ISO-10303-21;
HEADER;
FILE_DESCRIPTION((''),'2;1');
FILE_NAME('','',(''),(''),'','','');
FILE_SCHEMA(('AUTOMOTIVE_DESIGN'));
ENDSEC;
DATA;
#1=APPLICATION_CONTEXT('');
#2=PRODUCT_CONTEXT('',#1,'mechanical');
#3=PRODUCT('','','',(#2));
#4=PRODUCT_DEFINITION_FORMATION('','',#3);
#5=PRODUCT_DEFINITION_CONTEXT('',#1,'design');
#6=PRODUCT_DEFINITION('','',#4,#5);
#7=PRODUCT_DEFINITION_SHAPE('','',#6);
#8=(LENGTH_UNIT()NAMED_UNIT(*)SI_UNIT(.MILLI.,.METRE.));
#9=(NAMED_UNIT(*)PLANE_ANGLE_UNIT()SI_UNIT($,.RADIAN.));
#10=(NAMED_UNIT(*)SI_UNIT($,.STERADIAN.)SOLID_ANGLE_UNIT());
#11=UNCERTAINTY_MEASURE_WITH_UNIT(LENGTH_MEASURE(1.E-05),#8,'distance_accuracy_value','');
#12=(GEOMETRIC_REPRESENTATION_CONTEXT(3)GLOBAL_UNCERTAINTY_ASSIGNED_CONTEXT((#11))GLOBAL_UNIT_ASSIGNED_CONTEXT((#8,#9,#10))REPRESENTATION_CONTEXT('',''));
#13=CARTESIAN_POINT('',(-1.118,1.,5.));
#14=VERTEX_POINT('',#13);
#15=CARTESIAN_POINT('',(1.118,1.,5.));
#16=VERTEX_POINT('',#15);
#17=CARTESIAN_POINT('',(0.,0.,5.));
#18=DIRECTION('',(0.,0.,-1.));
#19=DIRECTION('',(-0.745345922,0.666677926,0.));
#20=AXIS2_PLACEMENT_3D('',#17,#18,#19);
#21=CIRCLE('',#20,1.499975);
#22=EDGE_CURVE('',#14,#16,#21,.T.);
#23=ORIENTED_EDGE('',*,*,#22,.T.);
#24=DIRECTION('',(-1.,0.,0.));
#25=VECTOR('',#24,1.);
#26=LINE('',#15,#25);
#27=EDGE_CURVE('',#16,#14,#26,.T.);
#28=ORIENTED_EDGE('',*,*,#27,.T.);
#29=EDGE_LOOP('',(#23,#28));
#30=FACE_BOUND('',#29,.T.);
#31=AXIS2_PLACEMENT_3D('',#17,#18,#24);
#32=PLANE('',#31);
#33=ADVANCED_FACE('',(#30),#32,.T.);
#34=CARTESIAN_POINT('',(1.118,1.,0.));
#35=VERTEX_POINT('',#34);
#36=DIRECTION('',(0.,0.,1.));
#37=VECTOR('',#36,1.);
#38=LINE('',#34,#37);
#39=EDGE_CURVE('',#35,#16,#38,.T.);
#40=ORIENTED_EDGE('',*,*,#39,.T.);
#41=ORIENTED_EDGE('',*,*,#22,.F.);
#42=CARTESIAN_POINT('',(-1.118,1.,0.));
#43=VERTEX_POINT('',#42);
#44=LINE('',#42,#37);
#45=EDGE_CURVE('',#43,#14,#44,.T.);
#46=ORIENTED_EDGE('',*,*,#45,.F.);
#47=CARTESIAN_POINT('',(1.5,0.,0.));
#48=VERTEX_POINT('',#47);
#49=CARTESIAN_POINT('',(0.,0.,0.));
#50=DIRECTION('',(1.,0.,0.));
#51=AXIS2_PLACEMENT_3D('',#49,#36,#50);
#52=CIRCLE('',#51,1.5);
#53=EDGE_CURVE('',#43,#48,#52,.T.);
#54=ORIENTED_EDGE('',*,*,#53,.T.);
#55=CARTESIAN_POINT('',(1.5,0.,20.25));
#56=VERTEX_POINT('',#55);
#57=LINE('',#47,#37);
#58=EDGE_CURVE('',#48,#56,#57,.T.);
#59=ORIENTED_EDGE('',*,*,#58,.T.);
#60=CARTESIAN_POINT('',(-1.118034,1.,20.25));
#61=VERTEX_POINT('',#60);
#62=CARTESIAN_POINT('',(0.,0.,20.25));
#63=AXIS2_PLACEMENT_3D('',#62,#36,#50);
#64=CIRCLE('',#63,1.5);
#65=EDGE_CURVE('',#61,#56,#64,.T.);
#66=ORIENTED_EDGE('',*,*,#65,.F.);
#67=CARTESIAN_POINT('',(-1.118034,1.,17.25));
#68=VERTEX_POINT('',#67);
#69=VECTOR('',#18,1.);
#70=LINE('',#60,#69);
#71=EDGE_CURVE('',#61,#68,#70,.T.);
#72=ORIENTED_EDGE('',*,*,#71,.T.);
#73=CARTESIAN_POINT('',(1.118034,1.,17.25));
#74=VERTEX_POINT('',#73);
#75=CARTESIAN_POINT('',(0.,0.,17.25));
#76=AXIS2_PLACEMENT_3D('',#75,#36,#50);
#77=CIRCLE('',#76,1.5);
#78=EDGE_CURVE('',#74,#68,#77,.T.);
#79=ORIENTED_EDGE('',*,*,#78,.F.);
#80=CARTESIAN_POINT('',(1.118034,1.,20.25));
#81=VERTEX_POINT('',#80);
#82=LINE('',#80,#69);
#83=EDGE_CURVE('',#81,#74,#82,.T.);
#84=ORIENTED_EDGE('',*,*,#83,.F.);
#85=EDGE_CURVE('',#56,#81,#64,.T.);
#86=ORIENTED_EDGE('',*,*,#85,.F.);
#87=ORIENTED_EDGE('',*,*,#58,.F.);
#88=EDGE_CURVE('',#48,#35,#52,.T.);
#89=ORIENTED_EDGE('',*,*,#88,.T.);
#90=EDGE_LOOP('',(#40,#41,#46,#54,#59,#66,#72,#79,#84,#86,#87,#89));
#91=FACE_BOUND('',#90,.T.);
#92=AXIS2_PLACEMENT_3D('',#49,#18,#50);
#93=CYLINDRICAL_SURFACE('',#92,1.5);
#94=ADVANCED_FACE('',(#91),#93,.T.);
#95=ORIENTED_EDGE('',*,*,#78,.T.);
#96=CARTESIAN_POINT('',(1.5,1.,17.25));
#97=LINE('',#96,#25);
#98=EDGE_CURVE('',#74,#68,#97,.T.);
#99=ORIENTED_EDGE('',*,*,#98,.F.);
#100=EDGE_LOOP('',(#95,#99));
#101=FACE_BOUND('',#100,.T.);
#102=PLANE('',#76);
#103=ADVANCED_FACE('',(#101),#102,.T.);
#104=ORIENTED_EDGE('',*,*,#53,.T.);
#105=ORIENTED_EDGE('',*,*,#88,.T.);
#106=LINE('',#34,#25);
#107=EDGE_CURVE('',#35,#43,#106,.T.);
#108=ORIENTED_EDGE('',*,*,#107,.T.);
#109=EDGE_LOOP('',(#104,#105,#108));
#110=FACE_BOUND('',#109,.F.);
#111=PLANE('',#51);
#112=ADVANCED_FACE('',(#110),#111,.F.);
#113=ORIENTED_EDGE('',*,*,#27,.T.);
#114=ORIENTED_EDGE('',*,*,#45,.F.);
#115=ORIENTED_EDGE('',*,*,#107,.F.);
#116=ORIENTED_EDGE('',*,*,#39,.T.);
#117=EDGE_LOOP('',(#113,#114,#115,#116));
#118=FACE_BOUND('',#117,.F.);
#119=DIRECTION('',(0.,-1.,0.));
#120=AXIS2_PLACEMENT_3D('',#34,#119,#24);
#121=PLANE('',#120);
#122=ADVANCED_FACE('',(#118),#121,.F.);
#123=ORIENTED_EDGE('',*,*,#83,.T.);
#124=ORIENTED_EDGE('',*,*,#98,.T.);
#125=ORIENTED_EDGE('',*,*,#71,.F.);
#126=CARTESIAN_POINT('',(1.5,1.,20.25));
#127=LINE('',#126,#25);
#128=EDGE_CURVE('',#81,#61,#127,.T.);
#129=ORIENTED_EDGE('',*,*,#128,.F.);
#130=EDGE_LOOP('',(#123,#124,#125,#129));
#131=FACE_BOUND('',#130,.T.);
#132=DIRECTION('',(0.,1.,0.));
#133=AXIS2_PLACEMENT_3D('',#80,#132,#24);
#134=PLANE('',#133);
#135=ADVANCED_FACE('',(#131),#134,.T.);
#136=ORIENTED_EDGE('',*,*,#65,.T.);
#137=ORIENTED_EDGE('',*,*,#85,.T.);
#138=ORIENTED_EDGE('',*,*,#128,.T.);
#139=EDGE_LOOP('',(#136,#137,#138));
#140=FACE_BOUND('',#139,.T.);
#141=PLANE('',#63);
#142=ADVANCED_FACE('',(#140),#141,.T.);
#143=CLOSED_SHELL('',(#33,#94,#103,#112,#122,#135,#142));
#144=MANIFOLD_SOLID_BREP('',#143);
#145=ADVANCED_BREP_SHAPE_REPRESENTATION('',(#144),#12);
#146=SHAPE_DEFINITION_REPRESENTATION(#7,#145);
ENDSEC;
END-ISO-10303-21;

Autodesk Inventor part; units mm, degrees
ref_plane "YZ Plane" through (0, 0, 0) normal (1, 0, 0) x (0, 1, 0)
ref_plane "XZ Plane" through (0, 0, 0) normal (0, 1, 0) x (-1, 0, 0)
ref_plane "XY Plane" through (0, 0, 0) normal (0, 0, 1) x (1, 0, 0)
sketch "Эскиз1" plane through (0, 0, 0) normal (0, 0, 1) x (1, 0, 0)
  circle A0 centre (0, 0) radius 1.5
  dimension "d0" = 3
extrude "Выдавливание1" add sketch "Эскиз1" along normal blind 20.25
sketch "Эскиз2" plane through (0, 0, 20.25) normal (0, 0, 1) x (1, 0, 0)
  line L0 (-1.5, -1) -> (1.5, -1)
  line L1 (1.5, -1) -> (1.5, 1)
  line L2 (1.5, 1) -> (-1.5, 1)
  line L3 (-1.5, 1) -> (-1.5, -1)
  line L4 (-1.5, -1) -> (1.5, 1) construction
  line L5 (1.5, -1) -> (-1.5, 1) construction
  circle A0 centre (0, 0) radius 1.5
  point P0 (-1.118, 1)
  point P1 (1.118, 1)
  dimension "d3" = 2
extrude "Выдавливание2" cut sketch "Эскиз2" against normal blind 3 contours A0 L2
sketch "Эскиз3" plane through (0, 0, 0) normal (0, 0, -1) x (-1, 0, 0)
  arc A0 (1.118, 1) -> (-1.118, 1) centre (0, 0) ccw projected
  line L0 (-1.118, 1) -> (1.118, 1) projected
extrude "Выдавливание3" cut sketch "Эскиз3" against normal blind 5
equation "\"Радиус_гибки\" = Толщина"
equation "\"Ширина_просечки\" = Толщина"
equation "\"Глубина_просечки\" = 0.5 * Толщина"
equation "\"Размер_просечки\" = 4 * Толщина"
equation "\"Мин_остаток\" = 2 * Толщина"
equation "\"Радиус_перехода\" = Радиус_гибки"
equation "\"Радиус_Якоби\" = Толщина"
equation "\"Размер_зазора\" = Толщина"
equation "\"Толщина\" = 0.5"
properties part number "Ось 3мм задняя"
